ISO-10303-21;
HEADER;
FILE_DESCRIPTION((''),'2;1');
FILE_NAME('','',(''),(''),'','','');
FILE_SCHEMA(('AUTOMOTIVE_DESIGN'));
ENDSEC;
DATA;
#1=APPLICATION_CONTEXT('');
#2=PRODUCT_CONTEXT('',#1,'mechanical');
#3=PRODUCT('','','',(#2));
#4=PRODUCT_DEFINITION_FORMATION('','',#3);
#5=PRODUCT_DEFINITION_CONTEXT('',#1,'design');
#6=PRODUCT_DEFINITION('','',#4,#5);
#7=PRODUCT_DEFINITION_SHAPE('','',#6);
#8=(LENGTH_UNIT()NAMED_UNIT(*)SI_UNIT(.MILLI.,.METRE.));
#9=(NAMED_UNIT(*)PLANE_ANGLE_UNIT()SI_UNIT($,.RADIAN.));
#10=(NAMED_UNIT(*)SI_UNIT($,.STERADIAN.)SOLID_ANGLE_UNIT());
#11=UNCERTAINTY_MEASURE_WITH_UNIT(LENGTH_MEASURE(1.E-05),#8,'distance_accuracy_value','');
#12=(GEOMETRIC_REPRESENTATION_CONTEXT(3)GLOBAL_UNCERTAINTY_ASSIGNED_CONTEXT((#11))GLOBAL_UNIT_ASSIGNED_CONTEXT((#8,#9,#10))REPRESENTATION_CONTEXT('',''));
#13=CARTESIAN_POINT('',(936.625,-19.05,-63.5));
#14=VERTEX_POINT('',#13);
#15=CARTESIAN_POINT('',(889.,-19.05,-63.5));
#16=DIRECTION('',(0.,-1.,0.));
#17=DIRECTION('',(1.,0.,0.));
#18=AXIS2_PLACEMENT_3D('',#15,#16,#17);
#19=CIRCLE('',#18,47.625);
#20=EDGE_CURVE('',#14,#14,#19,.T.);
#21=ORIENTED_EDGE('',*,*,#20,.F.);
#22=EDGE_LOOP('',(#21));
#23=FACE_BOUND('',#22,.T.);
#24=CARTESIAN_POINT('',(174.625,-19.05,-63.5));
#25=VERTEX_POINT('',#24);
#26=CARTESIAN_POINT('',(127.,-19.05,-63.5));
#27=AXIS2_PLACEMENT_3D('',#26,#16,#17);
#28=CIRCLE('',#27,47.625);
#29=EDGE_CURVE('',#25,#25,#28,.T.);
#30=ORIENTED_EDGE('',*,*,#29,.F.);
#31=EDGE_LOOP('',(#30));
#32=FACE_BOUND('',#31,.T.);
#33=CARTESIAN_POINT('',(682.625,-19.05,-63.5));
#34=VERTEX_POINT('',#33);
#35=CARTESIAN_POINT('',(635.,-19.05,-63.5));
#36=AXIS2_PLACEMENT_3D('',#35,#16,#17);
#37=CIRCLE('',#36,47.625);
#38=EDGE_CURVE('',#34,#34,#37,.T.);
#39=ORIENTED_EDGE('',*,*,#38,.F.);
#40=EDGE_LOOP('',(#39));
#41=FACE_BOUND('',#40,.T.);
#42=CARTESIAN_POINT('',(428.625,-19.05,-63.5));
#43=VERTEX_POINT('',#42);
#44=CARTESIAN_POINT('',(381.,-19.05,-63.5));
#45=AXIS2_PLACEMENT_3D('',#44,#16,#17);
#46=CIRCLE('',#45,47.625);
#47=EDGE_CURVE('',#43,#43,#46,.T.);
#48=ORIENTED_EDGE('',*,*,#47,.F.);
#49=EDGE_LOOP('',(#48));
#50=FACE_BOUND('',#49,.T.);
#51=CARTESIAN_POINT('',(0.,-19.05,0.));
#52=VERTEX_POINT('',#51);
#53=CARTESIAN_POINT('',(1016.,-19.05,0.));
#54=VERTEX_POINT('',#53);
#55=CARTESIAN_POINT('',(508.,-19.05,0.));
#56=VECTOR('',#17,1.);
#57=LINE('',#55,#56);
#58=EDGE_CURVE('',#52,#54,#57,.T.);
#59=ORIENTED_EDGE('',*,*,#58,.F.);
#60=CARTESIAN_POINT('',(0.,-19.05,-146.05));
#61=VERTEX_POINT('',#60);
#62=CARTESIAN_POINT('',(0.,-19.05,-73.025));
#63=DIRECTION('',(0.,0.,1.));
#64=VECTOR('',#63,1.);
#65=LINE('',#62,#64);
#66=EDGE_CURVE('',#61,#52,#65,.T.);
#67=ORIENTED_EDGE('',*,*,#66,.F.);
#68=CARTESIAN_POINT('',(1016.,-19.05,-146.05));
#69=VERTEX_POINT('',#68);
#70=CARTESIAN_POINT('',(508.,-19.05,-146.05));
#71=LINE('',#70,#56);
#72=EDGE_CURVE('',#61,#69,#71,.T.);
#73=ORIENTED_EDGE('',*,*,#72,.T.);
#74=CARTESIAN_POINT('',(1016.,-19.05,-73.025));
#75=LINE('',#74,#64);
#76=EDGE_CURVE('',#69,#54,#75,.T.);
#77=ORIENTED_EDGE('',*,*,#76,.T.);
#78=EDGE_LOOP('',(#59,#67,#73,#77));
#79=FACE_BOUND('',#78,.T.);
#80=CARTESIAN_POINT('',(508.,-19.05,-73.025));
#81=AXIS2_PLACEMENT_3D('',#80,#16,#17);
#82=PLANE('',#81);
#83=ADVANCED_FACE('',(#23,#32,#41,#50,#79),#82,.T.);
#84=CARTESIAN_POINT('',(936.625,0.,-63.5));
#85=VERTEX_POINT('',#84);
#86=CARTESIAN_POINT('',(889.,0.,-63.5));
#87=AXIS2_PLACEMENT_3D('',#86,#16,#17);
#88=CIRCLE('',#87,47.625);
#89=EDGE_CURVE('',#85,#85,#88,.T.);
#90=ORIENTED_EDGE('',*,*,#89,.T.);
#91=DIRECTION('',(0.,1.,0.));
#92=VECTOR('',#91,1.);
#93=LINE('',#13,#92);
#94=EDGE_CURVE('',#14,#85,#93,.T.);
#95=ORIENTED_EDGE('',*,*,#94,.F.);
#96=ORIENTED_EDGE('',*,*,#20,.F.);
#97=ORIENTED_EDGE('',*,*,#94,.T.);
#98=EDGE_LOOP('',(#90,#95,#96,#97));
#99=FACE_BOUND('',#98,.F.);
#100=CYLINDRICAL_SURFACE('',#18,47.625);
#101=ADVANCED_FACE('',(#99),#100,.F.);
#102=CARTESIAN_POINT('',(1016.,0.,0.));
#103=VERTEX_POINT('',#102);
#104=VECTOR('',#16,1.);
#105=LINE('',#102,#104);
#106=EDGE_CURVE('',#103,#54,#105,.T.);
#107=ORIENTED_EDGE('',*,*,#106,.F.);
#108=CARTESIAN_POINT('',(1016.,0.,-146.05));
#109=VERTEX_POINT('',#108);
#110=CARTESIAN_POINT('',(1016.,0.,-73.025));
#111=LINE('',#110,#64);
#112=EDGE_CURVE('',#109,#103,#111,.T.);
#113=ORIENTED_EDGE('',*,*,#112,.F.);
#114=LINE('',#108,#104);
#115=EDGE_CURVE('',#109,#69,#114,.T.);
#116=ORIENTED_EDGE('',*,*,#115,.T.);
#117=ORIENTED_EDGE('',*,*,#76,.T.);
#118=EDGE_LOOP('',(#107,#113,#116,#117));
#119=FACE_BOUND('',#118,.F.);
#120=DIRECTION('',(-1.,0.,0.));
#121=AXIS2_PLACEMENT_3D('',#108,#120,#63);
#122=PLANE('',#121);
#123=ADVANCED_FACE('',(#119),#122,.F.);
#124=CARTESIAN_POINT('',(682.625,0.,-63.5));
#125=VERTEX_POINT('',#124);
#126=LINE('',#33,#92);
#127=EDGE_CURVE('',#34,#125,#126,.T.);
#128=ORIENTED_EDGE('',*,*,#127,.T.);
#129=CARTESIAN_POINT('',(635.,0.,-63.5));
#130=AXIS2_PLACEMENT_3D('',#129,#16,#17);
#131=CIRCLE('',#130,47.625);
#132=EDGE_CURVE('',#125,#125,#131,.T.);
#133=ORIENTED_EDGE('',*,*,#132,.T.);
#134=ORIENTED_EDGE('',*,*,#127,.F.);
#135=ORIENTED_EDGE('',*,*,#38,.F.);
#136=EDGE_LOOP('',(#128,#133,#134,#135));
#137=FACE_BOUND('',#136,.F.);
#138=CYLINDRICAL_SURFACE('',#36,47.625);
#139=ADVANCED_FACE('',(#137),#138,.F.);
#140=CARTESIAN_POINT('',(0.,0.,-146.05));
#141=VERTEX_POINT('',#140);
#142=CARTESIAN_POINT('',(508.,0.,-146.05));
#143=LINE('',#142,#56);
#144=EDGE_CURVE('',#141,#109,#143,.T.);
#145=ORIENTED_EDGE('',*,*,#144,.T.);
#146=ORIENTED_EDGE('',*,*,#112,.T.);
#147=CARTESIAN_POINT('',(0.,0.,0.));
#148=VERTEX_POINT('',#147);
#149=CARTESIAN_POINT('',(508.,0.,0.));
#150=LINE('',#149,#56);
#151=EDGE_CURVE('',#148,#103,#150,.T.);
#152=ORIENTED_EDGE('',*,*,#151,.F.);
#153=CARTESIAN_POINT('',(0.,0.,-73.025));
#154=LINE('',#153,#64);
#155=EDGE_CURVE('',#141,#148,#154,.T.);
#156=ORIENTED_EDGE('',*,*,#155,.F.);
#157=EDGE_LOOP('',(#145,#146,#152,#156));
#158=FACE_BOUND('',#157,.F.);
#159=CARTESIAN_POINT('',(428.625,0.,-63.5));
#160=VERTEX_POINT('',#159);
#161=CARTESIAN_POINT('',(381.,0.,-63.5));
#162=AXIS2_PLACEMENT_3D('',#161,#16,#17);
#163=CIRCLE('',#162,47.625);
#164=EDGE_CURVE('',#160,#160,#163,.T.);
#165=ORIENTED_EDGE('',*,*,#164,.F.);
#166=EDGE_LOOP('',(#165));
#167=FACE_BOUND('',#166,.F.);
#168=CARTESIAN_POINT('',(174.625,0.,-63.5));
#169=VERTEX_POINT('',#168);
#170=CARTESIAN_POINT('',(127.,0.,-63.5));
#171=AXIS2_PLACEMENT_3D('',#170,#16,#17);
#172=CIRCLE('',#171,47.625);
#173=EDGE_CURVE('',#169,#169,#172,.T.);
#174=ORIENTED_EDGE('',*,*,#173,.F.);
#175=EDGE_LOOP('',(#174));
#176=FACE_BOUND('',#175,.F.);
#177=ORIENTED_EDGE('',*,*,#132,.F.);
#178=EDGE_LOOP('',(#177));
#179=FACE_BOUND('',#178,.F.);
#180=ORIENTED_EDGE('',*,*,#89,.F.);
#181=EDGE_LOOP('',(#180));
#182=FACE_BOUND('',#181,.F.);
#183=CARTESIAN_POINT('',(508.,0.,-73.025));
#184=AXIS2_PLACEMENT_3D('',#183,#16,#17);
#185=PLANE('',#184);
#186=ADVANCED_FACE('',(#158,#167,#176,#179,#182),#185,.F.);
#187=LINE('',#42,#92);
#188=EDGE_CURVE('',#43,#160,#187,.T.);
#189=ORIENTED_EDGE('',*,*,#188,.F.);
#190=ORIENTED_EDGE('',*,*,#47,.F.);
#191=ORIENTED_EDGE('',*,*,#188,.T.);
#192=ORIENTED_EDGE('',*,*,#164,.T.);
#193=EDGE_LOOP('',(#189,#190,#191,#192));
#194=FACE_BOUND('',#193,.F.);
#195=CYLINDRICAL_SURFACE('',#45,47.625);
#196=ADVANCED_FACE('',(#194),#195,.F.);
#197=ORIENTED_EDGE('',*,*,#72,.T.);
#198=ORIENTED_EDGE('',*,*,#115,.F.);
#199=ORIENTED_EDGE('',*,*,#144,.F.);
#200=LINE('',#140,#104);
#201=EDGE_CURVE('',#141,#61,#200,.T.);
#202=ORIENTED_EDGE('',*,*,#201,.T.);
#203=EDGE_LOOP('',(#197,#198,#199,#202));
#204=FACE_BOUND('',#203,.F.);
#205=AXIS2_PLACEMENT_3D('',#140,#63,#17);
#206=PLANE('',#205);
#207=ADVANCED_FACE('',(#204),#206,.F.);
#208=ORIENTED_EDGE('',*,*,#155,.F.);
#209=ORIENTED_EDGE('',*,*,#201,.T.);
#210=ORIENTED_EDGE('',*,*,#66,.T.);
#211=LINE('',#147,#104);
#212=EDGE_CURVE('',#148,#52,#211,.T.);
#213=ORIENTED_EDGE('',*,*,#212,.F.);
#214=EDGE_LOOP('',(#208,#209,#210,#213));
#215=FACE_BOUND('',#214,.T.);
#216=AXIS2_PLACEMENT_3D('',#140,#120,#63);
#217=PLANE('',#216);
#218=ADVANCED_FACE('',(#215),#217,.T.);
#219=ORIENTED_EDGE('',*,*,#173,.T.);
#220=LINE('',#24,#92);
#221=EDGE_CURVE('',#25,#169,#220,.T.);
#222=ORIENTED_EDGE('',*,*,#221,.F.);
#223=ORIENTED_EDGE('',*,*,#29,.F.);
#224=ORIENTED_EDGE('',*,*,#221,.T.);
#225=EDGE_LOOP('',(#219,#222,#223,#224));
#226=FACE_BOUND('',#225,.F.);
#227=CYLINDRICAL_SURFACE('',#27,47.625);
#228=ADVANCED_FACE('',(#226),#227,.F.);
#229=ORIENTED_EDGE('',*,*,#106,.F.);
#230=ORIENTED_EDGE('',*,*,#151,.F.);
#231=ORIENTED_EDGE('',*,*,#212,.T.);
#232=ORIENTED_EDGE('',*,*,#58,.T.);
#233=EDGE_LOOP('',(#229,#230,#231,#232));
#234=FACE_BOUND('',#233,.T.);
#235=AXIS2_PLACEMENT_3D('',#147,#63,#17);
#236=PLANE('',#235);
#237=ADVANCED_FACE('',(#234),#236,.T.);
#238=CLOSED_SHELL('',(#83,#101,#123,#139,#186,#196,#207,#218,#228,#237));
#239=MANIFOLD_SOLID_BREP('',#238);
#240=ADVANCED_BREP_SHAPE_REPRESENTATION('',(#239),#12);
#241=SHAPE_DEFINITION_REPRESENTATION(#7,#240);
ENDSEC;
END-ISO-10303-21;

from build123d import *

# Parameters (mm, degrees)
F0_W     = 1016
F0_H     = 146.05
F1_DEPTH = 19.05
F2_R     = 47.625
F3_DEPTH = 19.051


# Not quite as in the source:
# - a feature names something its author has since deleted; it is built from what else it names


with BuildPart() as f1:
    # F0 (on Front) → F1 (new body)
    with BuildSketch(Plane.XZ):
        with Locations((508, -73.025)):
            Rectangle(F0_W, F0_H)
    extrude(amount=F1_DEPTH)

    # F2 (on face) → F3 (cut, through all)
    with BuildSketch(Plane.XZ.offset(19.05)):
        with Locations((127, -63.5)):
            Circle(F2_R)
        with Locations((381, -63.5)):
            Circle(F2_R)
        with Locations((635, -63.5)):
            Circle(F2_R)
        with Locations((889, -63.5)):
            Circle(F2_R)
    extrude(amount=-F3_DEPTH, mode=Mode.SUBTRACT)


solid = f1.part
